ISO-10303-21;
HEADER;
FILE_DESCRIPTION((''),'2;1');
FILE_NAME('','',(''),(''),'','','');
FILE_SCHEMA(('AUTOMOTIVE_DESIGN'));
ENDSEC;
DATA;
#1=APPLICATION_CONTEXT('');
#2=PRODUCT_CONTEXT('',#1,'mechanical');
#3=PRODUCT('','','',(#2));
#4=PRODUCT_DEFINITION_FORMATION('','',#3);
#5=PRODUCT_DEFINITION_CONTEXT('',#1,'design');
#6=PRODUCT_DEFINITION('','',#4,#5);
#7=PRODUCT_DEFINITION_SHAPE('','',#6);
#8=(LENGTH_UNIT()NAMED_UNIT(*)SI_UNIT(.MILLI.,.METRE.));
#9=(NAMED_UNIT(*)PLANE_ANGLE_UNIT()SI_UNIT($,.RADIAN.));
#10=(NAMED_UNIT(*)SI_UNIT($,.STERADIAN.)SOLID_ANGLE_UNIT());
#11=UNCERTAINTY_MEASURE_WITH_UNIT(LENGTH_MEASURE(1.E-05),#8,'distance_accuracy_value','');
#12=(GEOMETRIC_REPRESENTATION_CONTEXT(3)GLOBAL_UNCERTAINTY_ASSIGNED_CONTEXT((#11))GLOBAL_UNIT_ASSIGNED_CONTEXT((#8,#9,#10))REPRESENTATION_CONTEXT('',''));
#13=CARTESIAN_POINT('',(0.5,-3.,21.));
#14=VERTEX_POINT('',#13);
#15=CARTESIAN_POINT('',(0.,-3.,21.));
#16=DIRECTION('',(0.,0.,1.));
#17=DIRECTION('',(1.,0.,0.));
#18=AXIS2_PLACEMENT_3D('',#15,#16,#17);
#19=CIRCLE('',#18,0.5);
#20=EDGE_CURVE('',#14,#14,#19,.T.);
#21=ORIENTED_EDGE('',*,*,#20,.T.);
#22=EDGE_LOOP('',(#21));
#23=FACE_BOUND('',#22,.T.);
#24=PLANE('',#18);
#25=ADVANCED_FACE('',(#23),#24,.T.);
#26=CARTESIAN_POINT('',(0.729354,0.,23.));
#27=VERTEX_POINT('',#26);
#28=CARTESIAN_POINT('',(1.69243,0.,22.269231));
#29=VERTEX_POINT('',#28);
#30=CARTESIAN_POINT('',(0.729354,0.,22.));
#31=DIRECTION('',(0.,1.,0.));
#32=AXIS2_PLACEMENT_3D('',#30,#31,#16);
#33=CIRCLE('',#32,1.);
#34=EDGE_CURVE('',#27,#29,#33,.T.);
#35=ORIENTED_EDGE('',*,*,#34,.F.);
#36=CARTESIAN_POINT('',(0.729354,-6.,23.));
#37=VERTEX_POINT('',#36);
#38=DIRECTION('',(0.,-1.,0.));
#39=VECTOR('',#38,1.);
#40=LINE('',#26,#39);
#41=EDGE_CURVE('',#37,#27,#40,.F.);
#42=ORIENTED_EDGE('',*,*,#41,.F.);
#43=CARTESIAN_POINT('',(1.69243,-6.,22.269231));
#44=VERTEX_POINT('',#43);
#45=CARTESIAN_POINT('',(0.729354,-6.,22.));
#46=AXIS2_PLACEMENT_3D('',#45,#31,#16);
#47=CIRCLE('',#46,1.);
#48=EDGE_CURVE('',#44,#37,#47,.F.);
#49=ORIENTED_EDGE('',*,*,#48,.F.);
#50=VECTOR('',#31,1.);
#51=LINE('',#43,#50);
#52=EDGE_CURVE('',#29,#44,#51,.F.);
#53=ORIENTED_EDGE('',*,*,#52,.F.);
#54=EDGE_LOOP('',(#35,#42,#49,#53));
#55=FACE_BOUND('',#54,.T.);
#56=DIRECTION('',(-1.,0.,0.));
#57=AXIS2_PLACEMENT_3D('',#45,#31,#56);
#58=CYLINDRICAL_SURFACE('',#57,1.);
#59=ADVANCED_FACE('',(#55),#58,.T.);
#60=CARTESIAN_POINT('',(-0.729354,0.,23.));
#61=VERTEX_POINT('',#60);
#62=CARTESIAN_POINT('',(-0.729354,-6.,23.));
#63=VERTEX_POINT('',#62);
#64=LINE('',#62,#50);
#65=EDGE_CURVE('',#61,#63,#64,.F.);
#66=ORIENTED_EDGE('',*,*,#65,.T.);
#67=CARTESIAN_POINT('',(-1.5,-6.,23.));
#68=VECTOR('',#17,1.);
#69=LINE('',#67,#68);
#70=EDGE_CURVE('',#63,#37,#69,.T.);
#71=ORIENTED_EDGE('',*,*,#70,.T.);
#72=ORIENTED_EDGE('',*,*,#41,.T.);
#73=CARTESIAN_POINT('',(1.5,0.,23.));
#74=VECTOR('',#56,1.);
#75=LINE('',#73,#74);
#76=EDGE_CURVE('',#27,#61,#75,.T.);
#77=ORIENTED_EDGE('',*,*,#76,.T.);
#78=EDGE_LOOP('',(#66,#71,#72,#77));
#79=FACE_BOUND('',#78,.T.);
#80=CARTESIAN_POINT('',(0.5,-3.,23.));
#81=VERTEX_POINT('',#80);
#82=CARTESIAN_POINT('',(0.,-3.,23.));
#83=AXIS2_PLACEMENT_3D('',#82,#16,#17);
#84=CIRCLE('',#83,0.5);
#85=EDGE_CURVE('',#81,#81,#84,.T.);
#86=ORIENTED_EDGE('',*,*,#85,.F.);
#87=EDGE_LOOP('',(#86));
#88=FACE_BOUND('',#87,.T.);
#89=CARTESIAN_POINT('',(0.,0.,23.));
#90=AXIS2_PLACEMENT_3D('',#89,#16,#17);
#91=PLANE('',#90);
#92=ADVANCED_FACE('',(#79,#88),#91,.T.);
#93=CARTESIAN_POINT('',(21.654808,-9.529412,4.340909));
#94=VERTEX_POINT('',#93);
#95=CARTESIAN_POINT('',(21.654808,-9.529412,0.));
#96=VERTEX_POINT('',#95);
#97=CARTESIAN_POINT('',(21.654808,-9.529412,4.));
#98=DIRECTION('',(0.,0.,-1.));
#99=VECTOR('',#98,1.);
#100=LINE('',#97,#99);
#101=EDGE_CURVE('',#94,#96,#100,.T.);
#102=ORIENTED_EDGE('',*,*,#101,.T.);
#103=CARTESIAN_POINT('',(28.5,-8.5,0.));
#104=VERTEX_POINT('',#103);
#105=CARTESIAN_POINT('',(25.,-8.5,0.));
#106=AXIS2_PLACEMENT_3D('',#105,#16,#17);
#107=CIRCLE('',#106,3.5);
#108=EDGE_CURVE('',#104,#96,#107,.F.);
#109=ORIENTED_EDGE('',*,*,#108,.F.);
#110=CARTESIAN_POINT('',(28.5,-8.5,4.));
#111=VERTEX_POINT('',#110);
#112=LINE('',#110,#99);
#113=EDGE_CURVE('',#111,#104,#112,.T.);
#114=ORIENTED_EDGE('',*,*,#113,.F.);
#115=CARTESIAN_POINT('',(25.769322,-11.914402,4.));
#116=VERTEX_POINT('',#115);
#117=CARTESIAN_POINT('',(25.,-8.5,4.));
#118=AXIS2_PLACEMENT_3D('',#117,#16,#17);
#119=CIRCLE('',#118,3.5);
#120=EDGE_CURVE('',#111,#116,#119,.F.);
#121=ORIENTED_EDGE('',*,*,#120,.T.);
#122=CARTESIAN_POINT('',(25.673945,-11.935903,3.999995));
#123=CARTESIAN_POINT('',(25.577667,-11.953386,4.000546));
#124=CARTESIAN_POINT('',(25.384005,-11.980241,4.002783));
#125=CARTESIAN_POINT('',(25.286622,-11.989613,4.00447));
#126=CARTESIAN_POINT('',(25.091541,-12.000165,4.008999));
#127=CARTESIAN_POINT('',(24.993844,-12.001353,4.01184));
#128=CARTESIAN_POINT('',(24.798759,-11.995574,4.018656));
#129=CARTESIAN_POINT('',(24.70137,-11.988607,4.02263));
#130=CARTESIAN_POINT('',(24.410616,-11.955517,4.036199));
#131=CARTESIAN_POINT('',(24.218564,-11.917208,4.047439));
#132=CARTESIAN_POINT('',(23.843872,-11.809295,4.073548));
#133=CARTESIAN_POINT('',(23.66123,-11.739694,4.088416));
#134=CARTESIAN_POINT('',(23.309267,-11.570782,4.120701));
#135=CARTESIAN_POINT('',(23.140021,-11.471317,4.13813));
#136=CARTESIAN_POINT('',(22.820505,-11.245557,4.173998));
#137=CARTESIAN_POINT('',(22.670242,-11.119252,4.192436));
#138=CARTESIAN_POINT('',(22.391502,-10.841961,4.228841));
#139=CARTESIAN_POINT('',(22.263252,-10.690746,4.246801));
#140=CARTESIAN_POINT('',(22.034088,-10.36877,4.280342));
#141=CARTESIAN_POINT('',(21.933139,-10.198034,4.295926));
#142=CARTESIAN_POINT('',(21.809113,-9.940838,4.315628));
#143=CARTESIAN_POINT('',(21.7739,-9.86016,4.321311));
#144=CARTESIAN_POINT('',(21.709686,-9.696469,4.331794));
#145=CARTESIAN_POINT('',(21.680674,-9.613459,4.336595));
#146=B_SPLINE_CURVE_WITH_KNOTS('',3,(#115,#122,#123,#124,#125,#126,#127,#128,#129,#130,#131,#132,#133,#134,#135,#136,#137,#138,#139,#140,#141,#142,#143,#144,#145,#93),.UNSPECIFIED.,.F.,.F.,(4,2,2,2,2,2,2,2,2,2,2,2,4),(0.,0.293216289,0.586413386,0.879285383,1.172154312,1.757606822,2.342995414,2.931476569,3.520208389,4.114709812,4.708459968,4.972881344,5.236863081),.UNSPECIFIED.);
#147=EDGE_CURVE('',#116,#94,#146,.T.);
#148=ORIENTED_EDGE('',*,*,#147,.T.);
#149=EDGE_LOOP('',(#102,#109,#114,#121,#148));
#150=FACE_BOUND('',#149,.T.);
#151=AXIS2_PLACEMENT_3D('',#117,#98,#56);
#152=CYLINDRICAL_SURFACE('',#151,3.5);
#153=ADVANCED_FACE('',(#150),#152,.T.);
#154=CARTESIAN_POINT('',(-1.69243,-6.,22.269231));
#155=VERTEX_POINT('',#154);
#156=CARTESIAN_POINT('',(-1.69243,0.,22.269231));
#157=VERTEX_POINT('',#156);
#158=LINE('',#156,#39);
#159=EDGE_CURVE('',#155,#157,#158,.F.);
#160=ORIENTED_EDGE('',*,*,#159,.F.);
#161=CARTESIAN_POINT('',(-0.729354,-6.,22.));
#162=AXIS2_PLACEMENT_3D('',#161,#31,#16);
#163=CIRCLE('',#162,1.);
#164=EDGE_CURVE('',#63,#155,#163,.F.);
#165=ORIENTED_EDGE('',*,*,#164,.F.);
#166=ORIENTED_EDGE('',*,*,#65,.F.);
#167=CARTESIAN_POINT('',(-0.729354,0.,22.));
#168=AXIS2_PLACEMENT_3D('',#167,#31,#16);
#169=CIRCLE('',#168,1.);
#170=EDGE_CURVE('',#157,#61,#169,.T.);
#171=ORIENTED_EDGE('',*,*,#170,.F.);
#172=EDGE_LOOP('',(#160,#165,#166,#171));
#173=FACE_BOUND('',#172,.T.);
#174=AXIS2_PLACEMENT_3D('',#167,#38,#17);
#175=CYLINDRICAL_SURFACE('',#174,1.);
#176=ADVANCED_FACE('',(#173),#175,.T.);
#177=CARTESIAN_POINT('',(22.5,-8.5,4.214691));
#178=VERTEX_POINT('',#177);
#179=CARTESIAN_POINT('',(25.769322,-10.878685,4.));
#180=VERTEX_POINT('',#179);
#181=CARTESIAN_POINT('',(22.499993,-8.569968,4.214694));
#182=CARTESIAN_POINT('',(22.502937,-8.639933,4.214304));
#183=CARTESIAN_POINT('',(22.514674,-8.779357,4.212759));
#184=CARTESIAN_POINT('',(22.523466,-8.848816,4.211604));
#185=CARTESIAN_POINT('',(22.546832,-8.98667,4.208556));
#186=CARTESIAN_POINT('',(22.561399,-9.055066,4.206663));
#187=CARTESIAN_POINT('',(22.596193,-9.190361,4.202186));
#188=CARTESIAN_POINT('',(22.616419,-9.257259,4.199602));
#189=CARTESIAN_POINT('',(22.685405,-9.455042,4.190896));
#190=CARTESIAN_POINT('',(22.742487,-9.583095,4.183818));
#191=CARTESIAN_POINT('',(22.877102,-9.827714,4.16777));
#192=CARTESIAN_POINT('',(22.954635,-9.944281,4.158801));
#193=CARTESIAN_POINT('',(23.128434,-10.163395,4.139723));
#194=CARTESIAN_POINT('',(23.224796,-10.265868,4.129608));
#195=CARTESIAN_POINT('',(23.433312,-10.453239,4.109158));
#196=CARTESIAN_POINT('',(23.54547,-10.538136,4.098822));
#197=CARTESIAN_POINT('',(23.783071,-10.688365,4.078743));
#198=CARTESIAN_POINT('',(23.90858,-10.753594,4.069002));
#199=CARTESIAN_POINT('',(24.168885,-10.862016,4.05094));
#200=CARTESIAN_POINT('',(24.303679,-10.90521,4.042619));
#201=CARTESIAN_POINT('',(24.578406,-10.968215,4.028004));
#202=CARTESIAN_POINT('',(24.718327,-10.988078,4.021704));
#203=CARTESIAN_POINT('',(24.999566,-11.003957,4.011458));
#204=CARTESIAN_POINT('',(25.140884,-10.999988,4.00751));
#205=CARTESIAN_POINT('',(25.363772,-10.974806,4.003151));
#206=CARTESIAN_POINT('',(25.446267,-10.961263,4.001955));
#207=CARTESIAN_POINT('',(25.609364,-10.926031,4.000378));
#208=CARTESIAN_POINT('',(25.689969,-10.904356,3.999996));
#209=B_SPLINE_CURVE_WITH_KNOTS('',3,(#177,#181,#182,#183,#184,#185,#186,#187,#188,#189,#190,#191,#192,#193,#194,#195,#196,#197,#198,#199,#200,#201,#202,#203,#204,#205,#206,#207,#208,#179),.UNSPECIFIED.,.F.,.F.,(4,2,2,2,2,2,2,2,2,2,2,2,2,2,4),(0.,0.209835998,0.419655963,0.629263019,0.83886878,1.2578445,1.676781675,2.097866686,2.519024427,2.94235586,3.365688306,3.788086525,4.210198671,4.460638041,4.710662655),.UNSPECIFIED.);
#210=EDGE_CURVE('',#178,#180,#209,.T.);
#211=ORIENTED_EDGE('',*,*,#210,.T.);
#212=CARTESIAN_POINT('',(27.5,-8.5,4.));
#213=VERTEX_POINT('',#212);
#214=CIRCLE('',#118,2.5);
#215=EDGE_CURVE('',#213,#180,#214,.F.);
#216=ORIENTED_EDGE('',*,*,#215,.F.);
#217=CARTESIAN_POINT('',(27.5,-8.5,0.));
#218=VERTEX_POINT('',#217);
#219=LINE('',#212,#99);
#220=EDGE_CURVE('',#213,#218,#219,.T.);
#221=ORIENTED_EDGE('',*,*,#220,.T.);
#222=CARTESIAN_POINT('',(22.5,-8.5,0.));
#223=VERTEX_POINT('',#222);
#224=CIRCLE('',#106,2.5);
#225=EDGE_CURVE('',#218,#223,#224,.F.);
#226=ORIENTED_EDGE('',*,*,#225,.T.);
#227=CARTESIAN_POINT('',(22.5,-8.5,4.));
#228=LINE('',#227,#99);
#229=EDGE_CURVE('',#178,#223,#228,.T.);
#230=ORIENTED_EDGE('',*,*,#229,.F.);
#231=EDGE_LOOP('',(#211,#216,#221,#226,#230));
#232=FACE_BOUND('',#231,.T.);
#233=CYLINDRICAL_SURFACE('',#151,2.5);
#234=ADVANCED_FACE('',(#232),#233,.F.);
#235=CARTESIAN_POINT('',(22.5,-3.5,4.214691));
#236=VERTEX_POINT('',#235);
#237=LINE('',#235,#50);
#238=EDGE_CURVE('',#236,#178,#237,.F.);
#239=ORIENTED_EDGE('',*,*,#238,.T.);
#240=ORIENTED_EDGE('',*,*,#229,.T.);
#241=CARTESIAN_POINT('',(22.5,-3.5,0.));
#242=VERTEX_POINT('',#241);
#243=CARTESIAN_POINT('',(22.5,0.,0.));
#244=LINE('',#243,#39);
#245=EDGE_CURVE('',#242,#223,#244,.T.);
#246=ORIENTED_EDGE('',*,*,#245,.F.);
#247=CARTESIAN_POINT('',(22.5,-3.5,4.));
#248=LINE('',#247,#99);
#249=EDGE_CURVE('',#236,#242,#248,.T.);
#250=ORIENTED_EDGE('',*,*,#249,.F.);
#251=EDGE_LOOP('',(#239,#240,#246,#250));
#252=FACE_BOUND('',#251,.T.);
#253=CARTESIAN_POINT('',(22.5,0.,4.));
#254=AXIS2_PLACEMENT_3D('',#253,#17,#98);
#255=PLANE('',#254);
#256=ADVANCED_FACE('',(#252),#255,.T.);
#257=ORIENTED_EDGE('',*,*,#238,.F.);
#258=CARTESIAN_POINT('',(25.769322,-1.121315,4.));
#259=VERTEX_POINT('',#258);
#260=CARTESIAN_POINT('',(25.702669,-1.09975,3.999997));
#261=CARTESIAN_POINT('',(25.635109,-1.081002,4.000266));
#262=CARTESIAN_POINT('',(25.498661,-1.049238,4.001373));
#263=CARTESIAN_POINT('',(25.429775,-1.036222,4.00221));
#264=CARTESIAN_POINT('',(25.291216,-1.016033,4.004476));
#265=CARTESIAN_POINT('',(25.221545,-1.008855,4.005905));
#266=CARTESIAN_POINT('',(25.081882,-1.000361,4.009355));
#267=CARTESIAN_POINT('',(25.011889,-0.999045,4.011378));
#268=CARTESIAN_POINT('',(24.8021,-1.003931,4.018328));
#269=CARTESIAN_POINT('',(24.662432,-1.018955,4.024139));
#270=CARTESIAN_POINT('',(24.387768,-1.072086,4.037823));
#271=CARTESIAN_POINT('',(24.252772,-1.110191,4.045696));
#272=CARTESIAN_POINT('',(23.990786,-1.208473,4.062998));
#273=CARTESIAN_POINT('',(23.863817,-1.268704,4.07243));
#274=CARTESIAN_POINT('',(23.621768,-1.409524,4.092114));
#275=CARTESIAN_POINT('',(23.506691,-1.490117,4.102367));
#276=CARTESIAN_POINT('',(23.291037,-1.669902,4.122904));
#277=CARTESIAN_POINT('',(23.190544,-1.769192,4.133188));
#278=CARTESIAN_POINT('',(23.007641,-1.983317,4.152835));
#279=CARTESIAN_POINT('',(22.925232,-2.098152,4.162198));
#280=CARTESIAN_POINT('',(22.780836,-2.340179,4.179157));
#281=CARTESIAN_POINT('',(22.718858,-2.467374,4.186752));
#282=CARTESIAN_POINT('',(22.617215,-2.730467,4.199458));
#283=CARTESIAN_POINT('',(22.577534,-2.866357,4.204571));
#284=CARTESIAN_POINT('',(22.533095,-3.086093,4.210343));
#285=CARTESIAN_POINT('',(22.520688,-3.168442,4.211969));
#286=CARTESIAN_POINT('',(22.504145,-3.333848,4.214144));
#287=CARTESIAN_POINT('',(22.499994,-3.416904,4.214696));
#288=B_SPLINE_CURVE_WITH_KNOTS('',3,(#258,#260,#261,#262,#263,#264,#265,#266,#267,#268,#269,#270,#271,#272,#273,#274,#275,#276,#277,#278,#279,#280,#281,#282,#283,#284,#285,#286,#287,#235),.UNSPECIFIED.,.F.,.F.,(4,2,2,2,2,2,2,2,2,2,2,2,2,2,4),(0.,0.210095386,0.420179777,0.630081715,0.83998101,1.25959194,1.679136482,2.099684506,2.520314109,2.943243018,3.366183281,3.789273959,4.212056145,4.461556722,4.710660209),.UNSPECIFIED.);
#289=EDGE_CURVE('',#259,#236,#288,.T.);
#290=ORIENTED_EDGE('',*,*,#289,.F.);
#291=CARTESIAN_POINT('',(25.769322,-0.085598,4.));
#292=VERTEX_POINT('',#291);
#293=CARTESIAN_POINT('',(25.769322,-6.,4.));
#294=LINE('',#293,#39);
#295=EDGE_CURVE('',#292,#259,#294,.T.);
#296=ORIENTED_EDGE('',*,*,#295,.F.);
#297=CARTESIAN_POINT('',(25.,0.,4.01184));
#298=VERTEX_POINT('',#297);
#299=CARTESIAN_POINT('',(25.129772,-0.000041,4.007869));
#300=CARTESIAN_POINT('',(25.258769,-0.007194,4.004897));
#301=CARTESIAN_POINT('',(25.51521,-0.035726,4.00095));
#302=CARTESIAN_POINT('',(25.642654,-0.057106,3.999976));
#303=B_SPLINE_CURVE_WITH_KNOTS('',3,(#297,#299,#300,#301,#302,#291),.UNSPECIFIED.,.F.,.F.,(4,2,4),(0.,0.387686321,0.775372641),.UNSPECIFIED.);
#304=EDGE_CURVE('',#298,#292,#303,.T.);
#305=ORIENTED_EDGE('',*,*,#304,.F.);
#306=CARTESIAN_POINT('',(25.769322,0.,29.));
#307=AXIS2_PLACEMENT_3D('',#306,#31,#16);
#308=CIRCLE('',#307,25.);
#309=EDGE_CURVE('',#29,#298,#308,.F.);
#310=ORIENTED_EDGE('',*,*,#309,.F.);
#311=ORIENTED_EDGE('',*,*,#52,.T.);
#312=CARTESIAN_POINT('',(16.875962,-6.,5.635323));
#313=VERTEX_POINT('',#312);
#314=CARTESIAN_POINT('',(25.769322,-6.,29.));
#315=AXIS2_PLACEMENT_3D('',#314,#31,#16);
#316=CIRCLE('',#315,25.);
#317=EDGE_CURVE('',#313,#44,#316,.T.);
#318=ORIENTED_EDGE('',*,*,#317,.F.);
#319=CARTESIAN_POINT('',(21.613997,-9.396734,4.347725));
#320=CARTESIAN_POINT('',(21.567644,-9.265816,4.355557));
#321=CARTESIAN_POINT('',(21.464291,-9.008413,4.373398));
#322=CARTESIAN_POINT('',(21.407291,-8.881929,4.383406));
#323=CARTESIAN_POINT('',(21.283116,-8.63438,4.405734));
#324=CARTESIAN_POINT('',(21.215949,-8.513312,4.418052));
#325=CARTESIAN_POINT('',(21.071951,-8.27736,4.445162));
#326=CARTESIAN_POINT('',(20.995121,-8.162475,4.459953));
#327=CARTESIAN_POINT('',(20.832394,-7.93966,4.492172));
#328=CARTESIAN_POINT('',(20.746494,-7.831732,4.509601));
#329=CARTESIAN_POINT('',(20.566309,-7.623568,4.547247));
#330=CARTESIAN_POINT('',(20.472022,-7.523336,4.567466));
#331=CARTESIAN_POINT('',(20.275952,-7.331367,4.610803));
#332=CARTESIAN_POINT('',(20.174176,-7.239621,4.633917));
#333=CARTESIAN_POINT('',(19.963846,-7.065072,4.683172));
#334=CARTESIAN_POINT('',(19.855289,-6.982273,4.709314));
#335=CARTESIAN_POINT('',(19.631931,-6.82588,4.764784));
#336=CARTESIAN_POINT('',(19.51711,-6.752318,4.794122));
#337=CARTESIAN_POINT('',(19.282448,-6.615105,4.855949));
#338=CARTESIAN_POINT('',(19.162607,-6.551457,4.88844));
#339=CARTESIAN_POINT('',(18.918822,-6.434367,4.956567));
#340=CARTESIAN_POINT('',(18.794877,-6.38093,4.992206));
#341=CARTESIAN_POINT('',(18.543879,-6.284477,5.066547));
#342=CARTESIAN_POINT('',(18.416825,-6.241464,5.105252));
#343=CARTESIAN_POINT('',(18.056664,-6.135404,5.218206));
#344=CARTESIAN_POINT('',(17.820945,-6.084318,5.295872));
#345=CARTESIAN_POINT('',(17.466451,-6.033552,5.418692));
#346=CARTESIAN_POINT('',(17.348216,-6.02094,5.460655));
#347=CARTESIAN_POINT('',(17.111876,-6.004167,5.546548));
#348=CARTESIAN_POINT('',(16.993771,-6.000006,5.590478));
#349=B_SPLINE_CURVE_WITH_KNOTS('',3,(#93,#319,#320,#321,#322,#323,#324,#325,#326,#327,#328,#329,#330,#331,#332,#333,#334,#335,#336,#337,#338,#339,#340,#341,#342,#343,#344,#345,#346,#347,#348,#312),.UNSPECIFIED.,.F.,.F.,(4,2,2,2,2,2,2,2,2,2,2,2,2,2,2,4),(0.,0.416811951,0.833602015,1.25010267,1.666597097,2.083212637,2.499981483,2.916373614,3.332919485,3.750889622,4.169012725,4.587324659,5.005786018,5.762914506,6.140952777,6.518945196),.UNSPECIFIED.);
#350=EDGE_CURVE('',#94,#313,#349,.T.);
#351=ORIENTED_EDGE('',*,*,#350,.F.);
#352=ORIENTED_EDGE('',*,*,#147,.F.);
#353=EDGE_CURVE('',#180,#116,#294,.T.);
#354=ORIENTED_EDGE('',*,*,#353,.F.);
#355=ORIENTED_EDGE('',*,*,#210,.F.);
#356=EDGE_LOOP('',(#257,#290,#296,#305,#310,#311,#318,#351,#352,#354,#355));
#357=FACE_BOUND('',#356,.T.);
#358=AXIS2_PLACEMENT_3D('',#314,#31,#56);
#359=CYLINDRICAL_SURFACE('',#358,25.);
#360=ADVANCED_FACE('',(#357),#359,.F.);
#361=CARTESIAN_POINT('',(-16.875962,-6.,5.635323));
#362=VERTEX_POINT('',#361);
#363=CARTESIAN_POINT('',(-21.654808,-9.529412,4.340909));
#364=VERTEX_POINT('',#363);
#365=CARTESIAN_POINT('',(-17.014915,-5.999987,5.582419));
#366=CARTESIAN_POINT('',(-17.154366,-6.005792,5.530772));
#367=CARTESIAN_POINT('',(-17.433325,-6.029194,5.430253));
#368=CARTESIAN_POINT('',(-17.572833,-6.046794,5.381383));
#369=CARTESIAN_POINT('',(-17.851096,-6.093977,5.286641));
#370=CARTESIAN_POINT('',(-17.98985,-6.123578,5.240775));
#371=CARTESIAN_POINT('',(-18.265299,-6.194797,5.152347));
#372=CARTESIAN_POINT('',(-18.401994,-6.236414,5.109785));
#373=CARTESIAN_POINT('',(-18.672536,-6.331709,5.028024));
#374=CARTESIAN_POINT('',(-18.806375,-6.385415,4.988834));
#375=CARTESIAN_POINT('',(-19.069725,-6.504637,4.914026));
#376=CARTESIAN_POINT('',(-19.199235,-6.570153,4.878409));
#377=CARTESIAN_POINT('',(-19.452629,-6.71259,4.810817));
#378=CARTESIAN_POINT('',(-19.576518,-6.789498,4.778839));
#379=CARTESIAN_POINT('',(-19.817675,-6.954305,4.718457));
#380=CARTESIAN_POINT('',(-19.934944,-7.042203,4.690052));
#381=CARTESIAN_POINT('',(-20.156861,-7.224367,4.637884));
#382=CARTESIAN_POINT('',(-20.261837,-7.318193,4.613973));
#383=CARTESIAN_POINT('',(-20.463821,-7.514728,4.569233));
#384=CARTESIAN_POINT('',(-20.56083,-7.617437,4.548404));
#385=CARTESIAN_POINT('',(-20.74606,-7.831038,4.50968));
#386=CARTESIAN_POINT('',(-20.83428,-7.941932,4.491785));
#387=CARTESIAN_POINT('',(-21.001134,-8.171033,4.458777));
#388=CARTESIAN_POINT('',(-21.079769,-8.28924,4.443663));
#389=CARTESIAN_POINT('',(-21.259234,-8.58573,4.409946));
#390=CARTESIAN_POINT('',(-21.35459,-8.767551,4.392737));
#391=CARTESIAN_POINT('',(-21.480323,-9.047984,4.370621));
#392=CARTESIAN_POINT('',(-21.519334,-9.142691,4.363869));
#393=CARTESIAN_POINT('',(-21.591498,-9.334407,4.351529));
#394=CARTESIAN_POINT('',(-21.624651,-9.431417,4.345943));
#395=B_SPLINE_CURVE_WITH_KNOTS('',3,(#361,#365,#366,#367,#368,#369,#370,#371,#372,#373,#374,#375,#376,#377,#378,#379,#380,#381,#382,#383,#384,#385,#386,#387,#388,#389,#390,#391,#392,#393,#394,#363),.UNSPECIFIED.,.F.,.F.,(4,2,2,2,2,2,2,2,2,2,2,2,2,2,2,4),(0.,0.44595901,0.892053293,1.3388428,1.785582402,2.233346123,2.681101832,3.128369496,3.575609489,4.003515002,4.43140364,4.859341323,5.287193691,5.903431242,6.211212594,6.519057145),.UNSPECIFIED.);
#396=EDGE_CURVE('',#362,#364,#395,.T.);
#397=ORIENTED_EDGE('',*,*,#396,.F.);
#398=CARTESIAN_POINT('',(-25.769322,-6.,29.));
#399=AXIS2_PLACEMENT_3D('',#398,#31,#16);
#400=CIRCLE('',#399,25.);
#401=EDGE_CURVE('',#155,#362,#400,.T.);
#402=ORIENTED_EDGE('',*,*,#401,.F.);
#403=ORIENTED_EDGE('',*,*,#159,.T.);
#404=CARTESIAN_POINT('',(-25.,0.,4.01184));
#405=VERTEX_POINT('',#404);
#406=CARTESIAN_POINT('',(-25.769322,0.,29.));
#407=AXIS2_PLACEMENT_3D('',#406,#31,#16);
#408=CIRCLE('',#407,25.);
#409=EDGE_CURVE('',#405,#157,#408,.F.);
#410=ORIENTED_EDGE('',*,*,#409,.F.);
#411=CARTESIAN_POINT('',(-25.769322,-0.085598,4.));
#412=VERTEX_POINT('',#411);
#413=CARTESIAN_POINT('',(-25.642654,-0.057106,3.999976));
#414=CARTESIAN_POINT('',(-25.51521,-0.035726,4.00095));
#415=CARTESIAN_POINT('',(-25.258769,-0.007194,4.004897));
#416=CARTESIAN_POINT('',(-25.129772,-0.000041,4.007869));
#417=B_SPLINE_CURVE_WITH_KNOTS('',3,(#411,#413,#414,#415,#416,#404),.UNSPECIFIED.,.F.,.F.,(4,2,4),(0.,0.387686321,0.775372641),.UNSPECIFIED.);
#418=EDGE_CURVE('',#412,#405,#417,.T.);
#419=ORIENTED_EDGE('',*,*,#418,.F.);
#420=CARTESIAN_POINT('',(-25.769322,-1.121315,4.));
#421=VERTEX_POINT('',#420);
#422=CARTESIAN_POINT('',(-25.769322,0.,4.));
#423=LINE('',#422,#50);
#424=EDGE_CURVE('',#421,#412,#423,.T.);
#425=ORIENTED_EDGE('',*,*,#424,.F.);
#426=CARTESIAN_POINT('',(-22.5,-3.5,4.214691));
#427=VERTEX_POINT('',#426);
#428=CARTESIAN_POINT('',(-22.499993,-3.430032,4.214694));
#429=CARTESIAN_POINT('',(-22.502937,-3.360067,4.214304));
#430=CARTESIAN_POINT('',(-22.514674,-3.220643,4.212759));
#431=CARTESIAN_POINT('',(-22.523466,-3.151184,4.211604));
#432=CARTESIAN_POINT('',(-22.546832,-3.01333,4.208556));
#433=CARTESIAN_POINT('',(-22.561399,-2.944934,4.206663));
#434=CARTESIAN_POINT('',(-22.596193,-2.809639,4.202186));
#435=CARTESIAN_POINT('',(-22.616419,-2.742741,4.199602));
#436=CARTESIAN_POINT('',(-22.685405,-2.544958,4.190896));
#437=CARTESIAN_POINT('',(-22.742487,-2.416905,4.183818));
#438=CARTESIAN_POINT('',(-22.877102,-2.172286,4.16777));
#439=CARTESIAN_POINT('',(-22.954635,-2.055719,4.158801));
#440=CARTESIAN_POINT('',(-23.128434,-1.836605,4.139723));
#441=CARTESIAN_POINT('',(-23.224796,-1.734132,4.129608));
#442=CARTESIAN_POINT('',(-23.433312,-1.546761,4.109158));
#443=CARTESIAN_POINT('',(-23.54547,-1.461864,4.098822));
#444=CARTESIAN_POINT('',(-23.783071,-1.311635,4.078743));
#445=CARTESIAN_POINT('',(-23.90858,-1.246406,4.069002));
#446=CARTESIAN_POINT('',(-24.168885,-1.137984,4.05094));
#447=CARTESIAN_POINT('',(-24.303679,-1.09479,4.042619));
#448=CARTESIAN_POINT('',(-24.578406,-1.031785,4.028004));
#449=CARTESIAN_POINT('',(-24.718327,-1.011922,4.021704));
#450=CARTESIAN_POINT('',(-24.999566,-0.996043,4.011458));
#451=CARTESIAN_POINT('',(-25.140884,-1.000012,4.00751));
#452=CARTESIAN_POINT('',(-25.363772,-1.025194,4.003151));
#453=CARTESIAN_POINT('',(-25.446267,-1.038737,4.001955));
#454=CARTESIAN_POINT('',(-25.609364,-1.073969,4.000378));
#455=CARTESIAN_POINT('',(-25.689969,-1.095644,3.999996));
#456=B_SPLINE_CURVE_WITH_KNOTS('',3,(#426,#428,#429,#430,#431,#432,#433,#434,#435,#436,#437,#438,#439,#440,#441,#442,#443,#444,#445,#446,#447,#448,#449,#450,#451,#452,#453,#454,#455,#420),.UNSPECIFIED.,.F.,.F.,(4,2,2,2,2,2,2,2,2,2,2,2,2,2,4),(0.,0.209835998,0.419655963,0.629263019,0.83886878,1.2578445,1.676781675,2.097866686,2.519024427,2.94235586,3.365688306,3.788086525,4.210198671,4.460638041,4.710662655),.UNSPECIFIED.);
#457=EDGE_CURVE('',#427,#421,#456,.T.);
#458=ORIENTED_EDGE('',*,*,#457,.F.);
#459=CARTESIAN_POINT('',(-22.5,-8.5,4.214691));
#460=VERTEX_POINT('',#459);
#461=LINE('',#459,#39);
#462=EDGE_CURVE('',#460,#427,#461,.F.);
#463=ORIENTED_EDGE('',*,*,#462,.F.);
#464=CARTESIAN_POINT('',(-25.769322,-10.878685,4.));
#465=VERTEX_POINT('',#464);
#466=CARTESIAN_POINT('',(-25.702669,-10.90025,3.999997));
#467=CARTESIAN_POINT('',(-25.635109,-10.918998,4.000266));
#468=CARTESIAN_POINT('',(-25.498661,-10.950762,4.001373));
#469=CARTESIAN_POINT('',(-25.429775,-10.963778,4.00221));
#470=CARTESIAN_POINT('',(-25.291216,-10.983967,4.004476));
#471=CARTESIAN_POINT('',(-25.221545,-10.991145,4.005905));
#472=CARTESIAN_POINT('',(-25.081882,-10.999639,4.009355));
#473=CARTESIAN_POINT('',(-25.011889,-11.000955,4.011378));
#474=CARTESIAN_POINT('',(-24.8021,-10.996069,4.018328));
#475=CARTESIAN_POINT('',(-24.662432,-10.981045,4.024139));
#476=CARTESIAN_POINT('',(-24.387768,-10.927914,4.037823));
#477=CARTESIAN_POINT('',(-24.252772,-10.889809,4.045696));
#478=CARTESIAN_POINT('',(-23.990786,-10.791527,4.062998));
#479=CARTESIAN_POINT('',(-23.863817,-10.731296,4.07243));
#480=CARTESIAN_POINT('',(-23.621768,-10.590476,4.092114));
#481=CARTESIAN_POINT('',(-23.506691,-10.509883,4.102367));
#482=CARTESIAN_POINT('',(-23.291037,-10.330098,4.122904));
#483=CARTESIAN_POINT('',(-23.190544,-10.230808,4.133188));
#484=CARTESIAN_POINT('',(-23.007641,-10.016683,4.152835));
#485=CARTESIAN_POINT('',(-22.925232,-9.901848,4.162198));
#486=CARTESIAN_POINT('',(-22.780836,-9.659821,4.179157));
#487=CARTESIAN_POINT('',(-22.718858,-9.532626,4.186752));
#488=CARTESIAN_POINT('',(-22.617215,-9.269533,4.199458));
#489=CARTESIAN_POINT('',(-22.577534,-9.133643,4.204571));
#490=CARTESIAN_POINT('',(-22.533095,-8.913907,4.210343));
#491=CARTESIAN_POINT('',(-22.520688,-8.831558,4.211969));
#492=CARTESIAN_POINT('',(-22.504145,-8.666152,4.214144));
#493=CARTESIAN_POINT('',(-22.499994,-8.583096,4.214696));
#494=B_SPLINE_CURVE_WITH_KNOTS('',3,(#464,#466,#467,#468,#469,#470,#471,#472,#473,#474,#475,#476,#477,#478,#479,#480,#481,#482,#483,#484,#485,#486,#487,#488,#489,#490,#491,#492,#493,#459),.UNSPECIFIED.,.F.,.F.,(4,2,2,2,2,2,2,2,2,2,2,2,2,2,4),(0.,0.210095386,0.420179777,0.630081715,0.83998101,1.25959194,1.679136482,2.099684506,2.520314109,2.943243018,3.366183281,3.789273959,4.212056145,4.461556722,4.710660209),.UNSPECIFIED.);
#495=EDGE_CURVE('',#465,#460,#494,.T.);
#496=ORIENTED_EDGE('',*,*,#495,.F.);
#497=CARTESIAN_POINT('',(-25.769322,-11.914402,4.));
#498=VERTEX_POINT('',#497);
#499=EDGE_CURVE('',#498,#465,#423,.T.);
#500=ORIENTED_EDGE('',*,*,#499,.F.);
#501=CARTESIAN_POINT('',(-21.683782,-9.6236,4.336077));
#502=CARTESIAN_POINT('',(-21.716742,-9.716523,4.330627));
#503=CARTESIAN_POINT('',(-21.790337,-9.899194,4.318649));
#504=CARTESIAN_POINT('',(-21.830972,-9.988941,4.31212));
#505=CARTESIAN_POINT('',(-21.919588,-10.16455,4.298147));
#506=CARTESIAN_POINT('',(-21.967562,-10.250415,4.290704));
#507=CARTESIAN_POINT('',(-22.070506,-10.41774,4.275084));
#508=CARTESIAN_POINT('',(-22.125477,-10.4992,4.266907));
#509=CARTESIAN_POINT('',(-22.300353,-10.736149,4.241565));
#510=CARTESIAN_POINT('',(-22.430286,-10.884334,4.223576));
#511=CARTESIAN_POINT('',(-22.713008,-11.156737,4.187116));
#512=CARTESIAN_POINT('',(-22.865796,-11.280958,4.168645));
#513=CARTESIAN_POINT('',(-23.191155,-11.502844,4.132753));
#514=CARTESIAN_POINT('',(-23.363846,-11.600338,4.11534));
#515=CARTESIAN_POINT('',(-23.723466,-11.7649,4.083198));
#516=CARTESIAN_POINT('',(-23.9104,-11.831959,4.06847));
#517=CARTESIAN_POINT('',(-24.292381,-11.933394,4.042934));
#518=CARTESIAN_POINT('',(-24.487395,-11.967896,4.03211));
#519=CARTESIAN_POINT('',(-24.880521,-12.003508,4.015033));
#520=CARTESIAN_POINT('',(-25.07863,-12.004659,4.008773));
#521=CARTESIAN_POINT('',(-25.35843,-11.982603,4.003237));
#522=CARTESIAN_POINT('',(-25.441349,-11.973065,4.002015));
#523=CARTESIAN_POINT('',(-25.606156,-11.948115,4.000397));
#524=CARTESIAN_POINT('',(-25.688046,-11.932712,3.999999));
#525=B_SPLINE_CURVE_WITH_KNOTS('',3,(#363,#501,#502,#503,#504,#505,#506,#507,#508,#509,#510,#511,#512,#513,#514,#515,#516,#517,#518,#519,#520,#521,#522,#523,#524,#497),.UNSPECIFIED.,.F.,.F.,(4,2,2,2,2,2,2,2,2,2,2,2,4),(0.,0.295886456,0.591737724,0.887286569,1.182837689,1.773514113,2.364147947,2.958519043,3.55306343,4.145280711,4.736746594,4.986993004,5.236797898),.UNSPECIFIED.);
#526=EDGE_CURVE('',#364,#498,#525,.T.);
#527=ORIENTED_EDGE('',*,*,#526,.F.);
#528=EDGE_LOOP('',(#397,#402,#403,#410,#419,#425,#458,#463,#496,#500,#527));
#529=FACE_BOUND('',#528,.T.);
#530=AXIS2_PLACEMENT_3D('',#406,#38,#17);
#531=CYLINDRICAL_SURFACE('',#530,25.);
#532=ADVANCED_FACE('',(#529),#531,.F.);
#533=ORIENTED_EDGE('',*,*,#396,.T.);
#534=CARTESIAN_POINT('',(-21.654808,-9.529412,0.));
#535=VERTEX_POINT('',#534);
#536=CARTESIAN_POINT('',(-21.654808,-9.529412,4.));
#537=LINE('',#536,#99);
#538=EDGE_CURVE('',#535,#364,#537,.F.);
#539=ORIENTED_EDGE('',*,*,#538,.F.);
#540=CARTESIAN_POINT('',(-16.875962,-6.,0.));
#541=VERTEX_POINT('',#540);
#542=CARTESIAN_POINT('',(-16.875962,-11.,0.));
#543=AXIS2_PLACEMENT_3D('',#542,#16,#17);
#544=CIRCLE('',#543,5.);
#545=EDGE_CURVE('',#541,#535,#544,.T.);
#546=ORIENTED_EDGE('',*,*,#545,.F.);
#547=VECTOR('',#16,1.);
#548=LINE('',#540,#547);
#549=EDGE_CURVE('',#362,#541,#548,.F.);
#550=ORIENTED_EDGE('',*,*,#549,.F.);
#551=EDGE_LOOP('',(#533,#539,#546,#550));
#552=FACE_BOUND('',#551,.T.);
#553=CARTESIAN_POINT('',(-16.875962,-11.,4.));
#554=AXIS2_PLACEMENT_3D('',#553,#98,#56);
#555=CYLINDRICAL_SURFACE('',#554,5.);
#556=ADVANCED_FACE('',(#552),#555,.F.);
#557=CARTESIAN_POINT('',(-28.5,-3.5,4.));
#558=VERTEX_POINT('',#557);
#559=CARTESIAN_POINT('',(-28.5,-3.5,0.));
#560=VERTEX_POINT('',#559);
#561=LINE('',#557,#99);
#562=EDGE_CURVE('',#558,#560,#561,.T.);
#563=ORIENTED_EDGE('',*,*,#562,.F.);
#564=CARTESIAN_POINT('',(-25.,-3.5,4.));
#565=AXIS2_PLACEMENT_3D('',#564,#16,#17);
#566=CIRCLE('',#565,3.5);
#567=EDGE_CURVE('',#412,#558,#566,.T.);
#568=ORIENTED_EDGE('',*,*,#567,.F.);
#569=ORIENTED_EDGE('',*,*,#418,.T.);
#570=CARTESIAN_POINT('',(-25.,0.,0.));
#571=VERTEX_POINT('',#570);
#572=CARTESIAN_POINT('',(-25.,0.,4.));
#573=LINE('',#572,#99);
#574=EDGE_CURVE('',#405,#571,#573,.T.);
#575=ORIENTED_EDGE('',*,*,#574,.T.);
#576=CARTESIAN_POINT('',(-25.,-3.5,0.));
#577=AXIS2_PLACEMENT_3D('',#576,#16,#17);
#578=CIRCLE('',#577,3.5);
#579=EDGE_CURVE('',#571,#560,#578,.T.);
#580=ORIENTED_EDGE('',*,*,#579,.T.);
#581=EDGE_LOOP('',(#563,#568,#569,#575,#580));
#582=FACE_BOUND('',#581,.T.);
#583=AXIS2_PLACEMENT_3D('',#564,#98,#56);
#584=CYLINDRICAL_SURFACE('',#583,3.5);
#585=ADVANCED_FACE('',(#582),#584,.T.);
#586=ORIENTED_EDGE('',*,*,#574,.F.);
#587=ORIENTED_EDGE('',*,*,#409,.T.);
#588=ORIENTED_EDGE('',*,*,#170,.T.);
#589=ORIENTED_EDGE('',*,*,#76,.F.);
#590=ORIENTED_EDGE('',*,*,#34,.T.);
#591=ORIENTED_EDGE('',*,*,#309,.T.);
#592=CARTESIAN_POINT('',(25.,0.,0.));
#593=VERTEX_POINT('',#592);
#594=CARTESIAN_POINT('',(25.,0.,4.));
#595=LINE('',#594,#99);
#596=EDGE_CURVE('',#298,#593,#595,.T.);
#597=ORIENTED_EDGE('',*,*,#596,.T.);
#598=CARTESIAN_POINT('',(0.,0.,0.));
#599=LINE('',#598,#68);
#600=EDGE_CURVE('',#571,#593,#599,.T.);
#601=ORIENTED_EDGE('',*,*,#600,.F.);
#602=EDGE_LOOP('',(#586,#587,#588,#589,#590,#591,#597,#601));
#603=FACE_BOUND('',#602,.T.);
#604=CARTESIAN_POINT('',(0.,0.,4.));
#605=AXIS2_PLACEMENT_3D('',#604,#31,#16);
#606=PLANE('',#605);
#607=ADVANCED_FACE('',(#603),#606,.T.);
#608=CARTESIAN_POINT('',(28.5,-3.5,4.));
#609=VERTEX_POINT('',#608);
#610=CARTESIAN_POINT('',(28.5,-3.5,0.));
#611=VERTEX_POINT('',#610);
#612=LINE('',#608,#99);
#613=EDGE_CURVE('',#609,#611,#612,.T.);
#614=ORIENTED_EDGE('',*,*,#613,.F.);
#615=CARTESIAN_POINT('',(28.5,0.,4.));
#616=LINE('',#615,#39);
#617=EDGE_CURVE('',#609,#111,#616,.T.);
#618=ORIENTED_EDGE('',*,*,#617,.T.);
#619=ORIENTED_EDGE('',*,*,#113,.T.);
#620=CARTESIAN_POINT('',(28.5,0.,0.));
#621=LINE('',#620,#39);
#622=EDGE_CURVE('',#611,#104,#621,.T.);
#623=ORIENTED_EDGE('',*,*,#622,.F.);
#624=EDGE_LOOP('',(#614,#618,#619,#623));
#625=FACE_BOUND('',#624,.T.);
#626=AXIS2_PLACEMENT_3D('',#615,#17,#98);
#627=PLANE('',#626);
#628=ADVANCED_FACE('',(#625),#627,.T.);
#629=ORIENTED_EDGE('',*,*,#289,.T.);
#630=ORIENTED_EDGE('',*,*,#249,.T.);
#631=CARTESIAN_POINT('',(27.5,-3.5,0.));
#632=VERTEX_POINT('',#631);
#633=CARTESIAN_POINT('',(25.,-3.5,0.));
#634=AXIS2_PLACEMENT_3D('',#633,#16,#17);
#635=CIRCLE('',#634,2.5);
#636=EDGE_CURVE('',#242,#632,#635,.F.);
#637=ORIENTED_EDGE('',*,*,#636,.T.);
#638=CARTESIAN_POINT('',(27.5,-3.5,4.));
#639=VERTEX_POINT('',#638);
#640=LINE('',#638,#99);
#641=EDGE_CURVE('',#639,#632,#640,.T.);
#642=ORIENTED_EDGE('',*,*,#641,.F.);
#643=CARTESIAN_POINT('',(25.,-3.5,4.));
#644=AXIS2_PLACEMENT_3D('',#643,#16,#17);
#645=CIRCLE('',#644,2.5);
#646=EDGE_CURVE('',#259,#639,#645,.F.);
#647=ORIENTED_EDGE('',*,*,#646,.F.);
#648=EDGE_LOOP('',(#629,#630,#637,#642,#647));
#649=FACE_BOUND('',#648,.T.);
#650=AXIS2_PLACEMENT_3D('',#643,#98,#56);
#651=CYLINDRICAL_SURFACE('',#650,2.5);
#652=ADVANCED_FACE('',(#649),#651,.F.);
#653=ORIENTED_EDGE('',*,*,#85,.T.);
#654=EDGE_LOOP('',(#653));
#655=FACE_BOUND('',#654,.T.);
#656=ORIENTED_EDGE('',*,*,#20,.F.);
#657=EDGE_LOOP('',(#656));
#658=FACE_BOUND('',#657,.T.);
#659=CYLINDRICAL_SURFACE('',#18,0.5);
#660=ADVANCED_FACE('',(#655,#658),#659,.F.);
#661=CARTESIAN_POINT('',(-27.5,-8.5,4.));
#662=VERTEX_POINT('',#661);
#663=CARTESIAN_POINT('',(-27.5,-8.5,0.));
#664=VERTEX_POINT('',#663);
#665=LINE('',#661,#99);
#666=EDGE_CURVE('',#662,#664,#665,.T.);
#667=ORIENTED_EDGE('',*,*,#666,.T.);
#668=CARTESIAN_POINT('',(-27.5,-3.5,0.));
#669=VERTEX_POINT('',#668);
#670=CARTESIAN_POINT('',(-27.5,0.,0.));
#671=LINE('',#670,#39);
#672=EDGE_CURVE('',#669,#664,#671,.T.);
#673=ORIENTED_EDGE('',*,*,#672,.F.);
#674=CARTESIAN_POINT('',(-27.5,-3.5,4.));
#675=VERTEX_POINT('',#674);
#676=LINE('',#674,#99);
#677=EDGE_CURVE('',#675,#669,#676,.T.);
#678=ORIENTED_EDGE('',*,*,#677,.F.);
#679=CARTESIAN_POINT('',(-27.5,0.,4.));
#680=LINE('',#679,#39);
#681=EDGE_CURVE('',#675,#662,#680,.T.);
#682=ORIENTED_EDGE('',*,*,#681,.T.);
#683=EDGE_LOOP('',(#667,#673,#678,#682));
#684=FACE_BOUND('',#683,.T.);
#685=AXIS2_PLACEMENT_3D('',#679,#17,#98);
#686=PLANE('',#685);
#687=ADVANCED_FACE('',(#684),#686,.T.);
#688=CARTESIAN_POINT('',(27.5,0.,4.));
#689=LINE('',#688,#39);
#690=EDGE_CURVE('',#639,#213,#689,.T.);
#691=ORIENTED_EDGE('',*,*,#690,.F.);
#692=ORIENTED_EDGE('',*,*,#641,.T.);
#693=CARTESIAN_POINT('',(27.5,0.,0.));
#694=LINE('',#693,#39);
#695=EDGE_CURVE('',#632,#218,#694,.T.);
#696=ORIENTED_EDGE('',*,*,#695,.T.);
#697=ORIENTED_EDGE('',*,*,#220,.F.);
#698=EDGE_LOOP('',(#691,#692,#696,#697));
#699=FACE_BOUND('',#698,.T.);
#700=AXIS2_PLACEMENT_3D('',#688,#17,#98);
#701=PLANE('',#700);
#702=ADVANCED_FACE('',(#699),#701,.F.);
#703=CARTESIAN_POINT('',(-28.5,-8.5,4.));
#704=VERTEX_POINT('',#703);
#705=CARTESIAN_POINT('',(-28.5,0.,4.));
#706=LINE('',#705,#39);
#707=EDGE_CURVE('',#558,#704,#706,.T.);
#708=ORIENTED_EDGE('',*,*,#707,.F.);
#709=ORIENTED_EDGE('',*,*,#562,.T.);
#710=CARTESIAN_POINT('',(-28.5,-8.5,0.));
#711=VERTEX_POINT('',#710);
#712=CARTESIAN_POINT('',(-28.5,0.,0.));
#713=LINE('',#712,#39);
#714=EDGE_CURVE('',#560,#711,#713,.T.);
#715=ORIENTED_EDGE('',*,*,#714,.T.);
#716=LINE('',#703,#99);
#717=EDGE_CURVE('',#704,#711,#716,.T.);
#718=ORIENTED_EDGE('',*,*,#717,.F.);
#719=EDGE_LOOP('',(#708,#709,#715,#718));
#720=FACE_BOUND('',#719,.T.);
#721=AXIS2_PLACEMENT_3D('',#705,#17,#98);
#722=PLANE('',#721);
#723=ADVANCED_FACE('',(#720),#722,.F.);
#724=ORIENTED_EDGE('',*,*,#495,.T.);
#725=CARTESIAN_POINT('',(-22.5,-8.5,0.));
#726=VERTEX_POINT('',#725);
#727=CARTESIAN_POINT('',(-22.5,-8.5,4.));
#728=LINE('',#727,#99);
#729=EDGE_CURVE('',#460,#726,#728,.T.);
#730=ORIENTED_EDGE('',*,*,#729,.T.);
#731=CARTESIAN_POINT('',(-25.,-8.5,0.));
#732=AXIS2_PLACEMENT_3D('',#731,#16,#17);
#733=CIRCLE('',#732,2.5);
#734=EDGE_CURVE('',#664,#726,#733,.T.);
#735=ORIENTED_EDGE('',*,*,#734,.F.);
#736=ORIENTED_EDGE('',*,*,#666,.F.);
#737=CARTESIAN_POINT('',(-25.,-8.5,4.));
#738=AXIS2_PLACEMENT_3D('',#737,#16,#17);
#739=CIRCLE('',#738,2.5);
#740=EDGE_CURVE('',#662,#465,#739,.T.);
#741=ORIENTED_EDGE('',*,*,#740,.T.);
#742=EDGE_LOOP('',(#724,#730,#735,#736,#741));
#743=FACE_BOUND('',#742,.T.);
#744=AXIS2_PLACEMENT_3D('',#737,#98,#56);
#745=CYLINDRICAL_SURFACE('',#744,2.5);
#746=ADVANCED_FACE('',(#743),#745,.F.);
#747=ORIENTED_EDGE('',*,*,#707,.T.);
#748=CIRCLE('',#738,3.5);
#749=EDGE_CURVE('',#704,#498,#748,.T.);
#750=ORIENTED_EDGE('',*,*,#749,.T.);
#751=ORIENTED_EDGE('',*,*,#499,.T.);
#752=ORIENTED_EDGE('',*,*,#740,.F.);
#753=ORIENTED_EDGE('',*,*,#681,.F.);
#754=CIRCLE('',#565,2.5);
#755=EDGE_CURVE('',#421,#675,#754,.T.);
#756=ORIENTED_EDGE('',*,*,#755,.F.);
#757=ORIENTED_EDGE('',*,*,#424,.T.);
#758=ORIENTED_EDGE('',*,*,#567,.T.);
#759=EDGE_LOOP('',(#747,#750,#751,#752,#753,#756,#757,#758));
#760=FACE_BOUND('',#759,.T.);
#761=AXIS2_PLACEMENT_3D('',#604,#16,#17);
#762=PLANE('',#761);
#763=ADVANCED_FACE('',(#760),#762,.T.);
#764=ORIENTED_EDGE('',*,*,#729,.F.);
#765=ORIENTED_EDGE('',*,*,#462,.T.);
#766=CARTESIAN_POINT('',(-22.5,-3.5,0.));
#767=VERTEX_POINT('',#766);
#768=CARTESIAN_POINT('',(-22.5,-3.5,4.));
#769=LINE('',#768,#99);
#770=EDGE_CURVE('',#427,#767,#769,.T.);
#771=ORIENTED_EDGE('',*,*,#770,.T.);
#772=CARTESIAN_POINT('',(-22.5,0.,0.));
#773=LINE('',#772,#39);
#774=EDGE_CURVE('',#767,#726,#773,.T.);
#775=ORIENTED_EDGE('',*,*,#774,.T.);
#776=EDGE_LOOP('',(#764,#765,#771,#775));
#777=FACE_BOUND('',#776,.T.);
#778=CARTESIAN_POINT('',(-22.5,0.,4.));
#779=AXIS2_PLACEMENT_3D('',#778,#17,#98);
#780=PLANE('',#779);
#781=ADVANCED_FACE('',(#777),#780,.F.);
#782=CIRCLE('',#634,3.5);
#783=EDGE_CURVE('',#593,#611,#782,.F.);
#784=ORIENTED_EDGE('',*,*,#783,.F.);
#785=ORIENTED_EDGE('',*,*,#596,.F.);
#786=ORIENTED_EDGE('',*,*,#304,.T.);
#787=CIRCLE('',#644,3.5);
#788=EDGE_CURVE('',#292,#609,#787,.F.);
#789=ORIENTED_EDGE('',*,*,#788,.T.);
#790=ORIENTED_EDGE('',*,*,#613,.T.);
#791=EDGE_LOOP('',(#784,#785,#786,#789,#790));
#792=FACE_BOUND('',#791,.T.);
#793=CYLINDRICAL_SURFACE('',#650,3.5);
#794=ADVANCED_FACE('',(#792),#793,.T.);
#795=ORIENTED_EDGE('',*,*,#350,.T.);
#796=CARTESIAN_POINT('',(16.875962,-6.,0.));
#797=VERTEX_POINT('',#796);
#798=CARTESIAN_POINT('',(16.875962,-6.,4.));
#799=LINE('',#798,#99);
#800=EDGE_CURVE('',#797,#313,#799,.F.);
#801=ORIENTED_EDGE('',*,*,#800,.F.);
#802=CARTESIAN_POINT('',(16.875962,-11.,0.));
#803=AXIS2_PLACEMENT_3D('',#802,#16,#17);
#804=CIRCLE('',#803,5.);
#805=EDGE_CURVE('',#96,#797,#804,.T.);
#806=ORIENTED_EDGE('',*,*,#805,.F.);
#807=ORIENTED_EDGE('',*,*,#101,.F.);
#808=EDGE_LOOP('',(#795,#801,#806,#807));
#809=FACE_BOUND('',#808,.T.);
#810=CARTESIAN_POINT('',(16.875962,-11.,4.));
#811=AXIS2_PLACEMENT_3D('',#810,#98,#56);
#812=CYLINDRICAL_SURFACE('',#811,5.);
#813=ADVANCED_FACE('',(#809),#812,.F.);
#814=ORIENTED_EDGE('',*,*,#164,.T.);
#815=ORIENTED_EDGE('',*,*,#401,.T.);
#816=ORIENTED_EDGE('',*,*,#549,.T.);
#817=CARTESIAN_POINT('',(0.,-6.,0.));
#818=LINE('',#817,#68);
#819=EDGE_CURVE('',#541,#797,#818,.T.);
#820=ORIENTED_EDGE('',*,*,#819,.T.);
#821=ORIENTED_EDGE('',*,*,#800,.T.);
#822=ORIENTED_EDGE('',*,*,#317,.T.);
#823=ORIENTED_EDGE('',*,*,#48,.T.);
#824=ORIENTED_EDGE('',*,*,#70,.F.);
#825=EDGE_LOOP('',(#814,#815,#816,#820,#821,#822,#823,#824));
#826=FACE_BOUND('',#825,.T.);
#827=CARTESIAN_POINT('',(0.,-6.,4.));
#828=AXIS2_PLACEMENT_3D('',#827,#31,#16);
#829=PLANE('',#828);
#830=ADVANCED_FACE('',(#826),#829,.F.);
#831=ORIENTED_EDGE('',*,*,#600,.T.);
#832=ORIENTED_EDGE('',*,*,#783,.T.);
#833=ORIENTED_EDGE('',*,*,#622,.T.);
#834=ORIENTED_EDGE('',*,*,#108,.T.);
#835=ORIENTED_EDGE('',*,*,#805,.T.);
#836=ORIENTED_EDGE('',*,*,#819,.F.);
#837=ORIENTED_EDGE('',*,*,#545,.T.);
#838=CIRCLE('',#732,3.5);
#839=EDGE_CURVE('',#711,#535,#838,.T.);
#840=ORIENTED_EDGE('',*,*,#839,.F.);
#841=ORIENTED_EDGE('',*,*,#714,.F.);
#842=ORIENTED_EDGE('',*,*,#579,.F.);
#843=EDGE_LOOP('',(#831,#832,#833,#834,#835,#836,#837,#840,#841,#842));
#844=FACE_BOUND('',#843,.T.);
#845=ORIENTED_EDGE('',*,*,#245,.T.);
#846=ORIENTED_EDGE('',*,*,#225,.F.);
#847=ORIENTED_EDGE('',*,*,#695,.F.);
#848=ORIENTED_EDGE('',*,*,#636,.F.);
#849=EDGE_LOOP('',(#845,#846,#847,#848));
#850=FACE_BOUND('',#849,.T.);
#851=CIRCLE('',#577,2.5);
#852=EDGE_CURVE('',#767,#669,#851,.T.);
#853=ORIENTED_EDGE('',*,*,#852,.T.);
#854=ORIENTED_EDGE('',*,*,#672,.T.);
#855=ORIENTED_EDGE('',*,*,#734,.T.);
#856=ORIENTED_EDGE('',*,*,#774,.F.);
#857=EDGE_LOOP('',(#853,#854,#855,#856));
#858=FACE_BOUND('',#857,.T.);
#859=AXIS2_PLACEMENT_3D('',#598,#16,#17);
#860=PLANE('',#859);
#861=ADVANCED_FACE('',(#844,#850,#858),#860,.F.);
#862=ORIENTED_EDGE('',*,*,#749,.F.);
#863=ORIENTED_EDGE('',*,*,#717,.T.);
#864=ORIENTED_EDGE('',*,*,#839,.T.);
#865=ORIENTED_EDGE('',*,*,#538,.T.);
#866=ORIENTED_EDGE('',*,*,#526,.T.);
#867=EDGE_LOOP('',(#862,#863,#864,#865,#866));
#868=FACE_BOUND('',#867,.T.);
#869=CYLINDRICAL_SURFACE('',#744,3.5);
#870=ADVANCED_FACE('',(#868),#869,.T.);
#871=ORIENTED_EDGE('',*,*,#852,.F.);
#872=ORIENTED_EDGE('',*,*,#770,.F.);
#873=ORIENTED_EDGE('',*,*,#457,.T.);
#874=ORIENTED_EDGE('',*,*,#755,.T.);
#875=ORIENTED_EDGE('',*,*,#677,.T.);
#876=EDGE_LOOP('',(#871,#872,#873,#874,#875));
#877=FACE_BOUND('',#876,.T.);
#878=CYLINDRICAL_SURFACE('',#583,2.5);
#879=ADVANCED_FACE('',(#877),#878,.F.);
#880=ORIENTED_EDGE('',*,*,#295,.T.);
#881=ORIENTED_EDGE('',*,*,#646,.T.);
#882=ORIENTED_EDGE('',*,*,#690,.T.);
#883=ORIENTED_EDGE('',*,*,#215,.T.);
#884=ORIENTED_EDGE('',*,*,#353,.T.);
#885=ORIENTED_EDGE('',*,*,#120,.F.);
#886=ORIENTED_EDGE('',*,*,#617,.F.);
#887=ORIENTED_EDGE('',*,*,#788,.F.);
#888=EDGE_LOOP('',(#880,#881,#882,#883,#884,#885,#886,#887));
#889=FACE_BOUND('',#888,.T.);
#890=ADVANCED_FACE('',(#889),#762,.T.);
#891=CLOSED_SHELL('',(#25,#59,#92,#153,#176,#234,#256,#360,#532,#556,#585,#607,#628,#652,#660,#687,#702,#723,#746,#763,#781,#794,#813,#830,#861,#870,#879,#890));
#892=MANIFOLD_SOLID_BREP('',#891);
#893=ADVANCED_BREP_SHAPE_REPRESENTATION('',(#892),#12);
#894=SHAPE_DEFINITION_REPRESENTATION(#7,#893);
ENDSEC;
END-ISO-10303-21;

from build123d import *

# Parameters (mm, degrees)
SALIENTE_EXTRUIR1_DEPTH = 4
REDONDEO1_R             = 5
CROQUIS2_W              = 3
CROQUIS2_H              = 6
SALIENTE_EXTRUIR2_DEPTH = 19
REDONDEO2_START         = -11.5644
REDONDEO2_DEPTH         = 11.5644
REDONDEO2_START_2       = -6
REDONDEO2_2_DEPTH       = 6
REDONDEO2_START_3       = -11.999981249
REDONDEO2_3_DEPTH       = 5.957327692
REDONDEO2_START_4       = 4
REDONDEO2_4_DEPTH       = 20
CROQUIS3_R              = 0.5
CORTAR_EXTRUIR1_DEPTH   = 2
REDONDEO3_R             = 1


with BuildPart() as part:
    # Croquis1 → Saliente-Extruir1 (new body)
    # profile 1 of 4: a face of its own
    with BuildSketch(Plane.XY):
        with BuildLine():
            Line((-21.5, -3.5), (-21.5, -8.5))
            ThreePointArc((-21.5, -8.5), (-25, -12), (-28.5, -8.5))
            Line((-28.5, -8.5), (-28.5, -3.5))
            ThreePointArc((-28.5, -3.5), (-25, 0), (-21.5, -3.5))
        make_face()
        with BuildLine():
            ThreePointArc((-27.5, -8.5), (-25, -11), (-22.5, -8.5))
            Line((-22.5, -8.5), (-22.5, -3.5))
            ThreePointArc((-22.5, -3.5), (-25, -1), (-27.5, -3.5))
            Line((-27.5, -3.5), (-27.5, -8.5))
        make_face(mode=Mode.SUBTRACT)
    # profile 2 of 4: a face of its own
    with BuildSketch(Plane.XY):
        with BuildLine():
            Line((0, 0), (-25, 0))
            ThreePointArc((-25, 0), (-22.525126266, -1.025126266), (-21.5, -3.5))
            Line((-21.5, -3.5), (-21.5, -6))
            Line((-21.5, -6), (0, -6))
            Line((0, -6), (0, 0))
        make_face()
    # profile 3 of 4: a face of its own
    with BuildSketch(Plane.XY):
        with BuildLine():
            Line((25, 0), (0, 0))
            Line((0, 0), (0, -6))
            Line((0, -6), (21.5, -6))
            Line((21.5, -6), (21.5, -3.5))
            ThreePointArc((21.5, -3.5), (22.525126266, -1.025126266), (25, 0))
        make_face()
    # profile 4 of 4: a face of its own
    with BuildSketch(Plane.XY):
        with BuildLine():
            ThreePointArc((28.5, -8.5), (25, -12), (21.5, -8.5))
            Line((21.5, -8.5), (21.5, -3.5))
            ThreePointArc((21.5, -3.5), (25, 0), (28.5, -3.5))
            Line((28.5, -3.5), (28.5, -8.5))
        make_face()
        with BuildLine():
            Line((22.5, -3.5), (22.5, -8.5))
            ThreePointArc((22.5, -8.5), (25, -11), (27.5, -8.5))
            Line((27.5, -8.5), (27.5, -3.5))
            ThreePointArc((27.5, -3.5), (25, -1), (22.5, -3.5))
        make_face(mode=Mode.SUBTRACT)
    extrude(amount=SALIENTE_EXTRUIR1_DEPTH)

    # Redondeo1
    redondeo1_edges = [part.edges().sort_by_distance(p)[0] for p in [
        (21.5, -6, 2),
        (-21.5, -6, 2),
    ]]
    fillet(redondeo1_edges, radius=REDONDEO1_R)

    # Croquis2 → Saliente-Extruir2 (add)
    with BuildSketch(Plane.XY.offset(4)):
        with Locations((0, -3)):
            Rectangle(CROQUIS2_W, CROQUIS2_H)
    extrude(amount=SALIENTE_EXTRUIR2_DEPTH)

    # Redondeo2: read off the stored shape, not the designer's step
    # Redondeo2 outline → Redondeo2 (add)
    with BuildSketch(Plane(origin=(0, 0, 0), x_dir=(1, 0, 0), z_dir=(0, 1, 0)).offset(REDONDEO2_START)):
        with BuildLine():
            ThreePointArc((1.5, -23), (9.10150319, -10.367130938), (22.5, -4.214691199))
            Line((22.5, -4.214691199), (22.5, -4))
            Line((22.5, -4), (1.5, -4))
            Line((1.5, -4), (1.5, -23))
        make_face()
        with BuildLine():
            Line((-22.5, -4), (-22.5, -4.214691199))
            ThreePointArc((-22.5, -4.214691199), (-9.10150319, -10.367130938), (-1.5, -23))
            Line((-1.5, -23), (-1.5, -4))
            Line((-1.5, -4), (-22.5, -4))
        make_face()
    extrude(amount=REDONDEO2_DEPTH)

    # Redondeo2 2 outline → Redondeo2 2 (add)
    with BuildSketch(Plane(origin=(0, 0, 0), x_dir=(1, 0, 0), z_dir=(0, 1, 0)).offset(REDONDEO2_START_2)):
        with BuildLine():
            ThreePointArc((22.5, -4.214691199), (24.131140284, -4.053730539), (25.769322199, -4))
            Line((25.769322199, -4), (22.5, -4))
            Line((22.5, -4), (22.5, -4.214691199))
        make_face()
        with BuildLine():
            Line((-22.5, -4), (-25.769322199, -4))
            ThreePointArc((-25.769322199, -4), (-24.131140284, -4.053730539), (-22.5, -4.214691199))
            Line((-22.5, -4.214691199), (-22.5, -4))
        make_face()
    extrude(amount=REDONDEO2_2_DEPTH)

    # Redondeo2 3 outline → Redondeo2 3 (add)
    with BuildSketch(Plane(origin=(0, 0, 0), x_dir=(1, 0, 0), z_dir=(0, 1, 0)).offset(REDONDEO2_START_3)):
        with BuildLine():
            ThreePointArc((22.5, -4.214691199), (24.131140284, -4.053730539), (25.769322199, -4))
            Line((25.769322199, -4), (22.5, -4))
            Line((22.5, -4), (22.5, -4.214691199))
        make_face()
        with BuildLine():
            Line((-22.5, -4), (-25.769322199, -4))
            ThreePointArc((-25.769322199, -4), (-24.131140284, -4.053730539), (-22.5, -4.214691199))
            Line((-22.5, -4.214691199), (-22.5, -4))
        make_face()
    extrude(amount=REDONDEO2_3_DEPTH)

    # Redondeo2 4 outline → Redondeo2 4 (cut)
    with BuildSketch(Plane.XY.offset(REDONDEO2_START_4)):
        with BuildLine():
            Line((-24.988543271, -11.999981249), (-22.5, -11.999981249))
            Line((-22.5, -11.999981249), (-22.5, -11.5644))
            Line((-22.5, -11.5644), (-1.5, -11.5644))
            Line((-1.5, -11.5644), (-1.5, -6))
            Line((-1.5, -6), (-16.875961595, -6))
            ThreePointArc((-16.875961595, -6), (-19.846404224, -6.978001667), (-21.654807716, -9.529411765))
            ThreePointArc((-21.654807716, -9.529411765), (-22.916085044, -11.311991902), (-24.988543271, -11.999981249))
        make_face()
        with BuildLine():
            Line((-25.769322199, -11.999981249), (-25.011456729, -11.999981249))
            ThreePointArc((-25.011456729, -11.999981249), (-25.392727477, -11.977896653), (-25.769322199, -11.914402342))
            Line((-25.769322199, -11.914402342), (-25.769322199, -11.999981249))
        make_face()
        with BuildLine():
            Line((22.5, -6), (25.769322199, -6))
            Line((25.769322199, -6), (25.769322199, -1.121314785))
            ThreePointArc((25.769322199, -1.121314785), (23.529167837, -1.478452882), (22.5, -3.5))
            Line((22.5, -3.5), (22.5, -6))
        make_face()
        with BuildLine():
            ThreePointArc((22.5, -8.5), (23.529167837, -10.521547118), (25.769322199, -10.878685215))
            Line((25.769322199, -10.878685215), (25.769322199, -6.042653557))
            Line((25.769322199, -6.042653557), (22.5, -6.042653557))
            Line((22.5, -6.042653557), (22.5, -8.5))
        make_face()
        with BuildLine():
            Line((25.011456729, -11.999981249), (25.769322199, -11.999981249))
            Line((25.769322199, -11.999981249), (25.769322199, -11.914402342))
            ThreePointArc((25.769322199, -11.914402342), (25.392727477, -11.977896653), (25.011456729, -11.999981249))
        make_face()
        with BuildLine():
            Line((1.5, -11.5644), (22.5, -11.5644))
            Line((22.5, -11.5644), (22.5, -11.999981249))
            Line((22.5, -11.999981249), (24.988543271, -11.999981249))
            ThreePointArc((24.988543271, -11.999981249), (22.916085044, -11.311991902), (21.654807716, -9.529411765))
            ThreePointArc((21.654807716, -9.529411765), (19.846404224, -6.978001667), (16.875961595, -6))
            Line((16.875961595, -6), (1.5, -6))
            Line((1.5, -6), (1.5, -11.5644))
        make_face()
        with BuildLine():
            ThreePointArc((25, 0), (25.387034755, -0.021465237), (25.769322199, -0.085597658))
            Line((25.769322199, -0.085597658), (25.769322199, 0))
            Line((25.769322199, 0), (25, 0))
        make_face()
        with BuildLine():
            ThreePointArc((-25.769322199, -10.878685215), (-23.529167837, -10.521547118), (-22.5, -8.5))
            Line((-22.5, -8.5), (-22.5, -6.042653557))
            Line((-22.5, -6.042653557), (-25.769322199, -6.042653557))
            Line((-25.769322199, -6.042653557), (-25.769322199, -10.878685215))
        make_face()
        with BuildLine():
            ThreePointArc((-25.769322199, -0.085597658), (-25.387034755, -0.021465237), (-25, 0))
            Line((-25, 0), (-25.769322199, 0))
            Line((-25.769322199, 0), (-25.769322199, -0.085597658))
        make_face()
        with BuildLine():
            Line((-25.769322199, -6), (-22.5, -6))
            Line((-22.5, -6), (-22.5, -3.5))
            ThreePointArc((-22.5, -3.5), (-23.529167837, -1.478452882), (-25.769322199, -1.121314785))
            Line((-25.769322199, -1.121314785), (-25.769322199, -6))
        make_face()
    extrude(amount=REDONDEO2_4_DEPTH, mode=Mode.SUBTRACT)

    # Croquis3 → Cortar-Extruir1 (cut)
    with BuildSketch(Plane.XY.offset(23)):
        with Locations((0, -3)):
            Circle(CROQUIS3_R)
    extrude(amount=-CORTAR_EXTRUIR1_DEPTH, mode=Mode.SUBTRACT)

    # Redondeo3
    redondeo3_edges = [part.edges().sort_by_distance(p)[0] for p in [
        (-1.5, -3, 23),
        (1.5, -3, 23),
    ]]
    fillet(redondeo3_edges, radius=REDONDEO3_R)


solid = part.part
